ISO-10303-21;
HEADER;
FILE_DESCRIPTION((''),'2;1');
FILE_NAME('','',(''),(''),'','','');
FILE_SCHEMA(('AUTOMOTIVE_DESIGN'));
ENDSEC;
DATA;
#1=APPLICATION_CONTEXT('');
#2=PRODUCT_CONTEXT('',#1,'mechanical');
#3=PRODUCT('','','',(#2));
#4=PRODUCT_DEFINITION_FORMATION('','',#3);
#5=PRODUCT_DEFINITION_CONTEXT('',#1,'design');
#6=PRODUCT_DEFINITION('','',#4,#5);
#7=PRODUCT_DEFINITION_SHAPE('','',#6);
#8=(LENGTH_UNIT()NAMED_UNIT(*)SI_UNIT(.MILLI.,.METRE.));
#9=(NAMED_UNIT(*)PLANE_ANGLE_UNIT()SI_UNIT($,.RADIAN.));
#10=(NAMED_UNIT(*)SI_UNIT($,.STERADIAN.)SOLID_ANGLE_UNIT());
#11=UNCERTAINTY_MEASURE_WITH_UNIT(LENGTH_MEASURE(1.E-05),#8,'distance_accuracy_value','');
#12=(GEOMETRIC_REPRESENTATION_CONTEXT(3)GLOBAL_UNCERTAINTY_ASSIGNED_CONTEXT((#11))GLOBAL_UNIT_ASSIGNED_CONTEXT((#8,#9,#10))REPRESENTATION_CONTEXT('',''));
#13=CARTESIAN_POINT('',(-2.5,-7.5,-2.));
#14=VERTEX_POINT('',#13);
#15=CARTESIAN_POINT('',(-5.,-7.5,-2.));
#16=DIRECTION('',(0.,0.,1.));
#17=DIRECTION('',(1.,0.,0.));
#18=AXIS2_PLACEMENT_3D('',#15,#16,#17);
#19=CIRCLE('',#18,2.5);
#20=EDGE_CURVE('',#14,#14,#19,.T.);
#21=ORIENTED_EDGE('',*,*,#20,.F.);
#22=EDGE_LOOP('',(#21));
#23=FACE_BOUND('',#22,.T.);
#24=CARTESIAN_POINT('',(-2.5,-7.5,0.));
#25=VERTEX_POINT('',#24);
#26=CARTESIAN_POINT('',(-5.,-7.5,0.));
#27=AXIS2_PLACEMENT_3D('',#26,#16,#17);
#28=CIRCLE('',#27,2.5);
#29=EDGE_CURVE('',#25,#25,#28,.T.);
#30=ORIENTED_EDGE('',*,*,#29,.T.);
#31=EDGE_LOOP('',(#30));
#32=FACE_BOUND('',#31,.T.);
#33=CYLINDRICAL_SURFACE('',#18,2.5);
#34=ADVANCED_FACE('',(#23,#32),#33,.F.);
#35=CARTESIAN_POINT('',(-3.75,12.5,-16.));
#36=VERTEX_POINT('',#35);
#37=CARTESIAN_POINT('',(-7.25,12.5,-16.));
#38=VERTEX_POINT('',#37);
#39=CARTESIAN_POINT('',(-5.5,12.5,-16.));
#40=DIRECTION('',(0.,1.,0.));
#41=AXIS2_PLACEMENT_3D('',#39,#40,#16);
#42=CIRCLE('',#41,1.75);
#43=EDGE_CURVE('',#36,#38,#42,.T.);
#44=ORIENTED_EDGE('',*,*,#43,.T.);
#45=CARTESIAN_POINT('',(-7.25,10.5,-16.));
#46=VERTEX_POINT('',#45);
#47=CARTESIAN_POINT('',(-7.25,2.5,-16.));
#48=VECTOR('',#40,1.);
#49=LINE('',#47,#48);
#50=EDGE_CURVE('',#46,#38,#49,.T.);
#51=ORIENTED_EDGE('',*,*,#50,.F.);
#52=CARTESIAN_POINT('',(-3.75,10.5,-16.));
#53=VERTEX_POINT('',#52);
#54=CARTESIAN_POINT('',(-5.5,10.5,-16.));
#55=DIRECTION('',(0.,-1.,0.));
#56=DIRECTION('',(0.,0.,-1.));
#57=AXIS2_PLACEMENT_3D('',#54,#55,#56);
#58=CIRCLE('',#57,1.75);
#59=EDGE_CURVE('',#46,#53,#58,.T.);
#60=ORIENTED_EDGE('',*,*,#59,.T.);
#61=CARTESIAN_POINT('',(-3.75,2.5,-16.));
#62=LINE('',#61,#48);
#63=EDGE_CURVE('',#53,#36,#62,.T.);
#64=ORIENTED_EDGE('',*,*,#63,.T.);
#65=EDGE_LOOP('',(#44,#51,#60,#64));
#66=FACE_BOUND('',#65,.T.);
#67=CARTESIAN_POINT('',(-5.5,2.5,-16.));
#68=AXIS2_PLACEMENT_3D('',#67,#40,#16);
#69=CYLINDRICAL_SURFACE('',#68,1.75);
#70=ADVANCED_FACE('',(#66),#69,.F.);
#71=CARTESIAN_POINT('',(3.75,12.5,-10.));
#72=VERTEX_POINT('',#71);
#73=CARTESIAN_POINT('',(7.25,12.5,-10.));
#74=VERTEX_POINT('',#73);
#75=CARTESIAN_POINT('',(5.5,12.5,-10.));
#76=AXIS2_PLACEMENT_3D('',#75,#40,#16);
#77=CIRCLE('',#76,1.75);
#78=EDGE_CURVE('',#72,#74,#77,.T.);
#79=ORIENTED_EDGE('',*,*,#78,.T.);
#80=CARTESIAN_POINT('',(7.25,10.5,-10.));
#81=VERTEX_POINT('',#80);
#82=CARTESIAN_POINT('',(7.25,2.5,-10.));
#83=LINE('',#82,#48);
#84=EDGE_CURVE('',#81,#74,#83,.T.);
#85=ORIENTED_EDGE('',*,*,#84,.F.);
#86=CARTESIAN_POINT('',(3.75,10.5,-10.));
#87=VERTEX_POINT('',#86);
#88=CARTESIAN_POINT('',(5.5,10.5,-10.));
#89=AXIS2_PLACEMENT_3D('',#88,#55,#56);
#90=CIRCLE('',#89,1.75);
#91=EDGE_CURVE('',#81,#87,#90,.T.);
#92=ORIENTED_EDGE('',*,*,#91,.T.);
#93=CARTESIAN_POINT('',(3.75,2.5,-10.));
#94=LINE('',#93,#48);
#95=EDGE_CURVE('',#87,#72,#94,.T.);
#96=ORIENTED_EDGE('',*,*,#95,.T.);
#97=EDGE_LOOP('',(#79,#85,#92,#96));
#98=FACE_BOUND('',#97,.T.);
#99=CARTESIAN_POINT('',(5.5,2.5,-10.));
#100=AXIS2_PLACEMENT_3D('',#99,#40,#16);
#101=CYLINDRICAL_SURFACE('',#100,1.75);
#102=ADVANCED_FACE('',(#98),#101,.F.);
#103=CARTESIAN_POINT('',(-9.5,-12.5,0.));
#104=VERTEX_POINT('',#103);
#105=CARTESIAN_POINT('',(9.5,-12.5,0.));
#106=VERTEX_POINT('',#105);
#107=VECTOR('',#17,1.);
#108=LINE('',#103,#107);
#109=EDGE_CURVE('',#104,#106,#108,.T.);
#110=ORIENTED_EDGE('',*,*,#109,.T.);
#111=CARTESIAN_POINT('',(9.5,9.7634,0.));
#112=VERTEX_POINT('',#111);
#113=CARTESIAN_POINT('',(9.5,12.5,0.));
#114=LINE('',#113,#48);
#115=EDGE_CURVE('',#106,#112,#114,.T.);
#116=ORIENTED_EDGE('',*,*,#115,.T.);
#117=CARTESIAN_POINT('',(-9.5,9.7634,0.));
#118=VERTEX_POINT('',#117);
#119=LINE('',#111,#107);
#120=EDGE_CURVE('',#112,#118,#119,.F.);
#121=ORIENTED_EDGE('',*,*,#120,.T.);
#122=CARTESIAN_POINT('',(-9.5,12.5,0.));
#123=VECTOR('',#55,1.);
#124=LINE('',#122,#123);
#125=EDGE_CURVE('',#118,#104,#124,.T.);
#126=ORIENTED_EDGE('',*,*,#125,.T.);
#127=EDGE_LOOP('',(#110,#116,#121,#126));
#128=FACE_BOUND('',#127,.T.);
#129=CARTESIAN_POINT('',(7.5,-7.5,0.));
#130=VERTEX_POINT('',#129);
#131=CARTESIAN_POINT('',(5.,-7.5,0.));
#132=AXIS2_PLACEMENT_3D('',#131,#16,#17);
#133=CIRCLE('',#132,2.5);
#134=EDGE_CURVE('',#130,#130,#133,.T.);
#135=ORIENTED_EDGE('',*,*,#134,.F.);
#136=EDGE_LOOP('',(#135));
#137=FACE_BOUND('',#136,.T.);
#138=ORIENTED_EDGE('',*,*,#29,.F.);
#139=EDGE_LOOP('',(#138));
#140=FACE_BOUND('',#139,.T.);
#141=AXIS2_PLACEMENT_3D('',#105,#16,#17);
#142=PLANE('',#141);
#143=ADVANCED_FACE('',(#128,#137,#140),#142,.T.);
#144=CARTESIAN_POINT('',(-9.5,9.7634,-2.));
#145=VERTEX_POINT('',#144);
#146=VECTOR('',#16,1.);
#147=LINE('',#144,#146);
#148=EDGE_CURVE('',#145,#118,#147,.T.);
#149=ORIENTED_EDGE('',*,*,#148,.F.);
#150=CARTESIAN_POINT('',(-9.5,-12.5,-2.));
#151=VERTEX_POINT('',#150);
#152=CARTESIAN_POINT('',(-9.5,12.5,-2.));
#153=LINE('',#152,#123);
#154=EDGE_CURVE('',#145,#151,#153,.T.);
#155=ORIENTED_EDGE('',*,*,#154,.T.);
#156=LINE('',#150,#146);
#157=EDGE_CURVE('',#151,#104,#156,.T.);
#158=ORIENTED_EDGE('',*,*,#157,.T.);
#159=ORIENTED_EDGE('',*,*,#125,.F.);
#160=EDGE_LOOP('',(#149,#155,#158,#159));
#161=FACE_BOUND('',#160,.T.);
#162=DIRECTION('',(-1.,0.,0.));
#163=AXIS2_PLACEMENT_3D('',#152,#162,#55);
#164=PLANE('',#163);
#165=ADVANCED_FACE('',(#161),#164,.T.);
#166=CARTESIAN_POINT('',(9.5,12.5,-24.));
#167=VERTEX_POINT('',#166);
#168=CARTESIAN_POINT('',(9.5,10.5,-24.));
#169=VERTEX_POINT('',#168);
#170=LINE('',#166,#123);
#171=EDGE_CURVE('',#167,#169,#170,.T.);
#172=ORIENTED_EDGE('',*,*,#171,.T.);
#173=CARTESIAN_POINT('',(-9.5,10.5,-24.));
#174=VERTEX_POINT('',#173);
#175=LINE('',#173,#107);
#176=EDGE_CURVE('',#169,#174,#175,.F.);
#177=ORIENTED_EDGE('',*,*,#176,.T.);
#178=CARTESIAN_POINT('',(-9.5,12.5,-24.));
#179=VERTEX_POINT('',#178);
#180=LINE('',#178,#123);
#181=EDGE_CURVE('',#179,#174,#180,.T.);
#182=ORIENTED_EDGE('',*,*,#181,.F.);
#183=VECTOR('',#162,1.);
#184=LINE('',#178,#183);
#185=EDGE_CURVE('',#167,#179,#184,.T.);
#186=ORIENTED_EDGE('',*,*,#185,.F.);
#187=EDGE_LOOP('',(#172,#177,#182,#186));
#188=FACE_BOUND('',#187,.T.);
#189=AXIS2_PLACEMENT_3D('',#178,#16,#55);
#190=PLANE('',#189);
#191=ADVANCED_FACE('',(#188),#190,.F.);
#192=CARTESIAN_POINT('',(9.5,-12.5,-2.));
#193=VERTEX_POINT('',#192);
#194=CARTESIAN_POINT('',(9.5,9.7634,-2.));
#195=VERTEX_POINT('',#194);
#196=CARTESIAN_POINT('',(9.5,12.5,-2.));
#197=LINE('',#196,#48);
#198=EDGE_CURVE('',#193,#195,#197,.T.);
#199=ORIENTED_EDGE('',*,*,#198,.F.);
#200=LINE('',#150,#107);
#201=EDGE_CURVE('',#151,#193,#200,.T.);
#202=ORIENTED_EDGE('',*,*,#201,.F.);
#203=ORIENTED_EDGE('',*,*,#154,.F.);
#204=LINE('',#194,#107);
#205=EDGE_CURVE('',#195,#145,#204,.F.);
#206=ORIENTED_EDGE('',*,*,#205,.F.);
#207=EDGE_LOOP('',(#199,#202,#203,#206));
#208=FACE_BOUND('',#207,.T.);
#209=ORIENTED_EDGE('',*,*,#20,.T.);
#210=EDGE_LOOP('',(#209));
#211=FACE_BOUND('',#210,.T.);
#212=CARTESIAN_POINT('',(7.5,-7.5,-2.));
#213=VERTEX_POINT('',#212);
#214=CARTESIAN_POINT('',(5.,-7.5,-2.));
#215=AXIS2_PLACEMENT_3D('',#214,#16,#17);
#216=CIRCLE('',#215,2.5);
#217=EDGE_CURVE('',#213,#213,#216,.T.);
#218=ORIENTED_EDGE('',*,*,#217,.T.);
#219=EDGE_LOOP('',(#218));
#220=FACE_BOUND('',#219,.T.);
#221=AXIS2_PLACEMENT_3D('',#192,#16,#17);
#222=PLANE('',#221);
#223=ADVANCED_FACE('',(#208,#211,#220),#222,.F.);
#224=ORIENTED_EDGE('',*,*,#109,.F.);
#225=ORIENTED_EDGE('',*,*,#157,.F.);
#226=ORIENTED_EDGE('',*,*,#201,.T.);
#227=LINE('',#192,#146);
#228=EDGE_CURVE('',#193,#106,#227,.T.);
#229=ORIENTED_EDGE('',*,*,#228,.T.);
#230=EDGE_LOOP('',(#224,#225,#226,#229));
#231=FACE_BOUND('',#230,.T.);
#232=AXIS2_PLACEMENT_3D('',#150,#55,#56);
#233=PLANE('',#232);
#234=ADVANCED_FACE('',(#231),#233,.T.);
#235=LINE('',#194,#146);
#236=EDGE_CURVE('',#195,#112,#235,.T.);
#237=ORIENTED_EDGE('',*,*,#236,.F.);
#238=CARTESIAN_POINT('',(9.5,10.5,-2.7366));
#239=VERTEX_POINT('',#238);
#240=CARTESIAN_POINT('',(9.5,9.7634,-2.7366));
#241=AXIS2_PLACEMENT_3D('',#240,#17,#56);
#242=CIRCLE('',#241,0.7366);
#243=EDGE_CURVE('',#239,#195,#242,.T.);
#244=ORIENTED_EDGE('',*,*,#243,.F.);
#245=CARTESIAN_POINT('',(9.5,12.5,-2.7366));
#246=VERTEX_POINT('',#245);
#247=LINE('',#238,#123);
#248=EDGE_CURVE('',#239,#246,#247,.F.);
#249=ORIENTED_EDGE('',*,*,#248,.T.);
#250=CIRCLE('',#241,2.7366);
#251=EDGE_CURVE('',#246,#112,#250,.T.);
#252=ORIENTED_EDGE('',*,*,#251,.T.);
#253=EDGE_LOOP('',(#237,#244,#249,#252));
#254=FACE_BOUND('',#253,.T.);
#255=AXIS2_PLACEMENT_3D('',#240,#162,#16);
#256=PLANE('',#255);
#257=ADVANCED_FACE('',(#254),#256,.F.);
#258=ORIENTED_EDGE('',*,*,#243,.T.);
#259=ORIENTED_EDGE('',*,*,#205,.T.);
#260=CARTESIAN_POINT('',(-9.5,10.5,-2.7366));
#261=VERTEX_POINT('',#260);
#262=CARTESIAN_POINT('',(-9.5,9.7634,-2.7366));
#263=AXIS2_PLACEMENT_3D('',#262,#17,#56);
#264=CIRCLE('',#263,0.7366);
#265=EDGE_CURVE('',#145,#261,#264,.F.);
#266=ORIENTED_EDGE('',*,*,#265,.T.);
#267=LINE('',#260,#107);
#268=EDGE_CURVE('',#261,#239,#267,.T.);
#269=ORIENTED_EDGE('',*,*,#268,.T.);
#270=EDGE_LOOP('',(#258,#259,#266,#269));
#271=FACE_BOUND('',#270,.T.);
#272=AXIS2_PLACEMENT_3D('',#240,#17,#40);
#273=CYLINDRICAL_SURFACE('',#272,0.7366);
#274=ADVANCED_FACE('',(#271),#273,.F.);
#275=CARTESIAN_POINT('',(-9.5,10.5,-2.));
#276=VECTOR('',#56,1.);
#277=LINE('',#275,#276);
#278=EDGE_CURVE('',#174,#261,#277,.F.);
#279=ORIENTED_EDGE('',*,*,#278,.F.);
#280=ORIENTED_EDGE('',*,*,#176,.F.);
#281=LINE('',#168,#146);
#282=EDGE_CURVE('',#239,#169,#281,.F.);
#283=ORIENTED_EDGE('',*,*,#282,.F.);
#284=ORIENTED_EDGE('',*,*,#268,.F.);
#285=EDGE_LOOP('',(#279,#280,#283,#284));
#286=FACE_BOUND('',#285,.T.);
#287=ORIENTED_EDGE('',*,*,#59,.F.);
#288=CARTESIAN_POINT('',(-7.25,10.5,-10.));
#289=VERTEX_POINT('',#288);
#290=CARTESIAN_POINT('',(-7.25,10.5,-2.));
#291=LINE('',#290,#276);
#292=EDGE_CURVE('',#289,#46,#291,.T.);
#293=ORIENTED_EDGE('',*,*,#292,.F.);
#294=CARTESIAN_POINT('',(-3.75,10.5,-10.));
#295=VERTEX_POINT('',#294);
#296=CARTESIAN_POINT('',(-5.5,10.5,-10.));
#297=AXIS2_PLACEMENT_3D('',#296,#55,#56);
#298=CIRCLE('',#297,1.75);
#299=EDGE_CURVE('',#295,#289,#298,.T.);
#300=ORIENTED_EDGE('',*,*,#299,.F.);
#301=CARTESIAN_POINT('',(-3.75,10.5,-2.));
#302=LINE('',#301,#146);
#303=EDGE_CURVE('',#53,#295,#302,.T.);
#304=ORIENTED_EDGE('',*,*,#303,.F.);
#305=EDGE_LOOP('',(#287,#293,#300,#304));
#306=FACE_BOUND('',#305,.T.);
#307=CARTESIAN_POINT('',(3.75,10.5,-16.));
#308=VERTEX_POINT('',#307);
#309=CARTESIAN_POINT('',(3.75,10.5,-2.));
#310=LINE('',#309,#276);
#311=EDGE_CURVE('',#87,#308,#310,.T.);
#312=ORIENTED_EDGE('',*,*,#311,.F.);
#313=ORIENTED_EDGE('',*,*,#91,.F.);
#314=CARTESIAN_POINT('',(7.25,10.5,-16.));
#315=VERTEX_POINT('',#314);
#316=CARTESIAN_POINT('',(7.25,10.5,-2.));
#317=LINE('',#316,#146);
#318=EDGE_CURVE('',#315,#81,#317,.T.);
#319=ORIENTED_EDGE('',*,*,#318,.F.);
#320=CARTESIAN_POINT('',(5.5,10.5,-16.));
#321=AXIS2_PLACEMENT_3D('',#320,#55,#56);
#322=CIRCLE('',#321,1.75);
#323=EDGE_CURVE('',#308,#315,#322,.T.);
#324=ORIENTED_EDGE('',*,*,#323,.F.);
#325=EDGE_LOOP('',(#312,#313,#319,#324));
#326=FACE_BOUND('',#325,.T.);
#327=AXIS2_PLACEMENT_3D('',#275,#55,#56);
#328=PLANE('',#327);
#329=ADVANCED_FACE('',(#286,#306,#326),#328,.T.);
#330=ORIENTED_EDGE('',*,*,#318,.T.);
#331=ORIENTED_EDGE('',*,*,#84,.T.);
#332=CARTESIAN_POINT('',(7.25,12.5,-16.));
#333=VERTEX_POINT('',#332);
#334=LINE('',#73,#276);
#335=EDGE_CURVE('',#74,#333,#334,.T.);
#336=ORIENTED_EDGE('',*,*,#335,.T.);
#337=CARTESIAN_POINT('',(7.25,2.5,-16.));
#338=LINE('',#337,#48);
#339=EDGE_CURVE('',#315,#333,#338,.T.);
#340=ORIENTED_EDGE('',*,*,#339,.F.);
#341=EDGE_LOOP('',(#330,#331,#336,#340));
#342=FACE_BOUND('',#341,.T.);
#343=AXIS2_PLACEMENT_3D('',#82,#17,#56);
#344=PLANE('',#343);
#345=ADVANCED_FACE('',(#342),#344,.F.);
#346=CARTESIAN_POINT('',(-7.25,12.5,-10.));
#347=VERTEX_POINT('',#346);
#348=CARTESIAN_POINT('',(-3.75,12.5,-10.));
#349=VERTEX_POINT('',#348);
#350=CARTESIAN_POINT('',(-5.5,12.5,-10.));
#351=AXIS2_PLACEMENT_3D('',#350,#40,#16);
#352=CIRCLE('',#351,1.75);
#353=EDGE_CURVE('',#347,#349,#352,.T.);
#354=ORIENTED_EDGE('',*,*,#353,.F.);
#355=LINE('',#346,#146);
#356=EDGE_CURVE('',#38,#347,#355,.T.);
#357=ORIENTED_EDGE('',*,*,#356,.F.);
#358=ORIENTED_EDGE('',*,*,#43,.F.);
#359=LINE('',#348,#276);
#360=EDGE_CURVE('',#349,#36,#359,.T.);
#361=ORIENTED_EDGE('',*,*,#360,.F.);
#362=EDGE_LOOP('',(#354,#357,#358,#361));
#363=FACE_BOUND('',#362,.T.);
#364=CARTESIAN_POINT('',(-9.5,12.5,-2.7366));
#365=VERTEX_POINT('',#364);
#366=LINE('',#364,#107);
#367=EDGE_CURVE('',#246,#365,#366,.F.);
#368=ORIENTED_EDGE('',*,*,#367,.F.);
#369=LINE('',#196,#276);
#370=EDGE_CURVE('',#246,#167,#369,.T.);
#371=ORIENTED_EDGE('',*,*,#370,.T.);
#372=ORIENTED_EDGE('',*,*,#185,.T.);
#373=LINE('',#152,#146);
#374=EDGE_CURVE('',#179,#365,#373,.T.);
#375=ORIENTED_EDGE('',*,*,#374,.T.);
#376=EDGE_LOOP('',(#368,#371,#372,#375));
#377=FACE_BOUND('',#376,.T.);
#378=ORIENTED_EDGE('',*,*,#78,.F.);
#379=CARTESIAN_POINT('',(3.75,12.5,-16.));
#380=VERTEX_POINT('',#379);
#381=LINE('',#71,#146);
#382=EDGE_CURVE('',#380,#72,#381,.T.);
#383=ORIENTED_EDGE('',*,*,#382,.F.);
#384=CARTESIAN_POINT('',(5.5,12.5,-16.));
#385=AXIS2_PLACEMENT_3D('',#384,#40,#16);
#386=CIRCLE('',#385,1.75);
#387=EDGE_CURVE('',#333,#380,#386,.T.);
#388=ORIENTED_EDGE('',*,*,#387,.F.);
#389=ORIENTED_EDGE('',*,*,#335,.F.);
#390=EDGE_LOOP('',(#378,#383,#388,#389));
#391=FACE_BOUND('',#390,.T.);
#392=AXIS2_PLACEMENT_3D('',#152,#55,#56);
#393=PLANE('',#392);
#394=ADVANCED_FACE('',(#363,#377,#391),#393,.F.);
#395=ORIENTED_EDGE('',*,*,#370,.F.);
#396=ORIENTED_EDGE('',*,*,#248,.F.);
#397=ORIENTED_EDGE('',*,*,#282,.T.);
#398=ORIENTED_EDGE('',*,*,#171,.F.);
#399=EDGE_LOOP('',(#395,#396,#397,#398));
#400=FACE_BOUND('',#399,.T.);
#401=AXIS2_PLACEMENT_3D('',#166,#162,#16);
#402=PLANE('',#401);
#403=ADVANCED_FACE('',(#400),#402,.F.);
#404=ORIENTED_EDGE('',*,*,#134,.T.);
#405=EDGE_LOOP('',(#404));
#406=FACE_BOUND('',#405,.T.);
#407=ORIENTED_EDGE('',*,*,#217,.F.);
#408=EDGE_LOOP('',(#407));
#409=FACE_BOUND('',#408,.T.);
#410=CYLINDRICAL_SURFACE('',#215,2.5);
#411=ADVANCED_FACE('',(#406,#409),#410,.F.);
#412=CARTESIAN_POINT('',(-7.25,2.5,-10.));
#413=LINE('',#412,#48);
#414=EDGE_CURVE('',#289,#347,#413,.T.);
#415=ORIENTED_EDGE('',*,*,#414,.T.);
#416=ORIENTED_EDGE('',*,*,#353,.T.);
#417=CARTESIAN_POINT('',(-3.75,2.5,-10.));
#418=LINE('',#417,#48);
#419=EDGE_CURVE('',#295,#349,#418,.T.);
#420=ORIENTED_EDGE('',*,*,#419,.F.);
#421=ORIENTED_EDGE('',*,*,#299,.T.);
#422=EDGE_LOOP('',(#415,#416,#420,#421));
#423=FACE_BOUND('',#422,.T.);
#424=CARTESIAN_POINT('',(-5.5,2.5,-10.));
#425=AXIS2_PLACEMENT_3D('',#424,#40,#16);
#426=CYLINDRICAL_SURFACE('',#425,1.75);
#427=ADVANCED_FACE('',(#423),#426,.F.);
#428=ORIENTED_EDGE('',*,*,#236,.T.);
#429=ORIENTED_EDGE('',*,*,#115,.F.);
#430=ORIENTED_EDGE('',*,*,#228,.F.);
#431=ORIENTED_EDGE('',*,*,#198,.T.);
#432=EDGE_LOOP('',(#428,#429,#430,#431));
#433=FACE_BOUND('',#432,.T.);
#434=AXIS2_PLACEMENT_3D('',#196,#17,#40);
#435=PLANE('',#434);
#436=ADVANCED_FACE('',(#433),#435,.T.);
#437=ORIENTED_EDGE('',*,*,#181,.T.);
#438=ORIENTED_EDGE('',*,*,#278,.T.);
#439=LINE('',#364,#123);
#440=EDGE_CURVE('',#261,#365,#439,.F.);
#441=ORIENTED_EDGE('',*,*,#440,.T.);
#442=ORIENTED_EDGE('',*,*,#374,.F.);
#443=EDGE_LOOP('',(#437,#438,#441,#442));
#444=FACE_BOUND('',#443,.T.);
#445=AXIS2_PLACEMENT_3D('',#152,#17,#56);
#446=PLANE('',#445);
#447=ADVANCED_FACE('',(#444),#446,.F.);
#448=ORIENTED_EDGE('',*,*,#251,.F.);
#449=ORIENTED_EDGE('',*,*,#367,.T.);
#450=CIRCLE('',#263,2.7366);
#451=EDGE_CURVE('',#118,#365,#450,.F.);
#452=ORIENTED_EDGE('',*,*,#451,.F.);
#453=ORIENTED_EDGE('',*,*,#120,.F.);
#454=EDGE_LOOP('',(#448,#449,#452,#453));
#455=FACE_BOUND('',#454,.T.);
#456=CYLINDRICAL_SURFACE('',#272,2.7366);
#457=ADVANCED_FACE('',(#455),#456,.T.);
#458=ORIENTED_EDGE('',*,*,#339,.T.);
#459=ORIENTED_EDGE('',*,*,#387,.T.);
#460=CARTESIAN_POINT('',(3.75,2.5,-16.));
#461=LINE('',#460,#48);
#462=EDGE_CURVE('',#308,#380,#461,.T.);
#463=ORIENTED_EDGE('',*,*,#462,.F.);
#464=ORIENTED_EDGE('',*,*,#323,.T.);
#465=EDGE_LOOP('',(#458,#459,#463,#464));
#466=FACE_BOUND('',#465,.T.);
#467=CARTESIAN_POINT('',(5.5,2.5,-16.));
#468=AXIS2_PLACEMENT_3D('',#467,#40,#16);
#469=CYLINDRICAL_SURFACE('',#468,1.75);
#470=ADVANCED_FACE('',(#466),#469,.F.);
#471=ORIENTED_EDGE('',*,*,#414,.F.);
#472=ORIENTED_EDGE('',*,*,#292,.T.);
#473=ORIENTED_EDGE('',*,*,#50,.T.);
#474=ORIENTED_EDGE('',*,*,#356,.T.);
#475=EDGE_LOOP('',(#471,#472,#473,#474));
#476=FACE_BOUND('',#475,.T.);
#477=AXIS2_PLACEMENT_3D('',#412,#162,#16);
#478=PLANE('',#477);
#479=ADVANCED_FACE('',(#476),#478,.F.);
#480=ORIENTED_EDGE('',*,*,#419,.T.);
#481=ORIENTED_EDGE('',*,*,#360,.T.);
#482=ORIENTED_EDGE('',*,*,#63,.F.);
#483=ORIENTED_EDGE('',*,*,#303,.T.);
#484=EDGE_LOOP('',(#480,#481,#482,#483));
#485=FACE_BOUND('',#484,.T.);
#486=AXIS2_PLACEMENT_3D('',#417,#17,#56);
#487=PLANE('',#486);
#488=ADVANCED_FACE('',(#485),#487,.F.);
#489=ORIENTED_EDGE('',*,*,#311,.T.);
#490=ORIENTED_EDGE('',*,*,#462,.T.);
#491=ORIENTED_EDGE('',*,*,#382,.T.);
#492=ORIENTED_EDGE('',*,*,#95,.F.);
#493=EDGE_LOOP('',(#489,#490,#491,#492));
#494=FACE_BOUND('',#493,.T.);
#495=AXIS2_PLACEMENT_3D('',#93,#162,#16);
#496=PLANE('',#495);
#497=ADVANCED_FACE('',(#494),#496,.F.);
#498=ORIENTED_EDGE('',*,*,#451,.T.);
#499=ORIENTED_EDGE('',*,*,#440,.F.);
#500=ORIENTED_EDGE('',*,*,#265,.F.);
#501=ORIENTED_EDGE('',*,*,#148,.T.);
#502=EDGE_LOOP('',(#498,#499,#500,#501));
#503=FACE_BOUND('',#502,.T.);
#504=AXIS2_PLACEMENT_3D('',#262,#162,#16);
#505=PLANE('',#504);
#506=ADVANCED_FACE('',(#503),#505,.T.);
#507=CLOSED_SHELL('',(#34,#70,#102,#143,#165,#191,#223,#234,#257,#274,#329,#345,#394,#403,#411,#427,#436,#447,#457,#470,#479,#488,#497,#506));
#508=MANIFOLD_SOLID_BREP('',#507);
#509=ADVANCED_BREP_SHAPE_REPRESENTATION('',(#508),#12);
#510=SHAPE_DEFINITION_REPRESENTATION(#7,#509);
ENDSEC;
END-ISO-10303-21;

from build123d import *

# Parameters (mm, degrees)
SKETCH_1_W                       = 19
SKETCH_1_H                       = 25
SKETCH_1_R                       = 2.5
SM_BASE_FLANGE_1_DEPTH           = 2
SM_EDGE_FLANGE_1_STRIP_W         = 9.4732
SM_EDGE_FLANGE_1_STRIP_H         = 2
SM_EDGE_FLANGE_1_STRIP_CUT_DEPTH = 19
SM_EDGE_FLANGE_1_DEPTH           = 19
CUT_EXTRUDE_1_DEPTH              = 10


# Sheet-metal steps are written as plain solids
with BuildPart() as part:
    # Sketch 1 → 基体-法兰1 (new body)
    with BuildSketch(Plane.XY):
        Rectangle(SKETCH_1_W, SKETCH_1_H)
        with Locations((-5, -7.5)):
            Circle(SKETCH_1_R, mode=Mode.SUBTRACT)
        with Locations((5, -7.5)):
            Circle(SKETCH_1_R, mode=Mode.SUBTRACT)
    extrude(amount=-SM_BASE_FLANGE_1_DEPTH)

    # 边线-法兰1 strip (across the edge) → 边线-法兰1 strip cut (cut)
    with BuildSketch(Plane(origin=(-9.5, 12.5, -2), x_dir=(0, -1, 0), z_dir=(1, 0, 0))):
        with Locations((-2, -1)):
            Rectangle(SM_EDGE_FLANGE_1_STRIP_W, SM_EDGE_FLANGE_1_STRIP_H)
    extrude(amount=SM_EDGE_FLANGE_1_STRIP_CUT_DEPTH, mode=Mode.SUBTRACT)

    # 边线-法兰1 section (across the edge) → 边线-法兰1 (add)
    with BuildSketch(Plane(origin=(-9.5, 12.5, -2), x_dir=(0, -1, 0), z_dir=(1, 0, 0))):
        with BuildLine():
            Line((0, 0.7366), (0, 22))
            Line((0, 22), (2, 22))
            Line((2, 22), (2, 0.7366))
            ThreePointArc((2, 0.7366), (2.215745145, 0.215745145), (2.7366, 0))
            Line((2.7366, 0), (2.7366, -2))
            ThreePointArc((2.7366, -2), (0.801531583, -1.198468417), (0, 0.7366))
        make_face()
    extrude(amount=SM_EDGE_FLANGE_1_DEPTH)

    # 草图6 → 切除-拉伸1 (cut)
    with BuildSketch(Plane(origin=(0, 12.5, 0), x_dir=(1, 0, 0), z_dir=(0, 1, 0))):
        with BuildLine():
            Line((-7.25, 10), (-7.25, 16))
            ThreePointArc((-7.25, 16), (-5.5, 17.75), (-3.75, 16))
            Line((-3.75, 16), (-3.75, 10))
            ThreePointArc((-3.75, 10), (-5.5, 8.25), (-7.25, 10))
        make_face()
        with BuildLine():
            Line((3.75, 10), (3.75, 16))
            ThreePointArc((3.75, 16), (5.5, 17.75), (7.25, 16))
            Line((7.25, 16), (7.25, 10))
            ThreePointArc((7.25, 10), (5.5, 8.25), (3.75, 10))
        make_face()
    extrude(amount=-CUT_EXTRUDE_1_DEPTH, mode=Mode.SUBTRACT)


solid = part.part
